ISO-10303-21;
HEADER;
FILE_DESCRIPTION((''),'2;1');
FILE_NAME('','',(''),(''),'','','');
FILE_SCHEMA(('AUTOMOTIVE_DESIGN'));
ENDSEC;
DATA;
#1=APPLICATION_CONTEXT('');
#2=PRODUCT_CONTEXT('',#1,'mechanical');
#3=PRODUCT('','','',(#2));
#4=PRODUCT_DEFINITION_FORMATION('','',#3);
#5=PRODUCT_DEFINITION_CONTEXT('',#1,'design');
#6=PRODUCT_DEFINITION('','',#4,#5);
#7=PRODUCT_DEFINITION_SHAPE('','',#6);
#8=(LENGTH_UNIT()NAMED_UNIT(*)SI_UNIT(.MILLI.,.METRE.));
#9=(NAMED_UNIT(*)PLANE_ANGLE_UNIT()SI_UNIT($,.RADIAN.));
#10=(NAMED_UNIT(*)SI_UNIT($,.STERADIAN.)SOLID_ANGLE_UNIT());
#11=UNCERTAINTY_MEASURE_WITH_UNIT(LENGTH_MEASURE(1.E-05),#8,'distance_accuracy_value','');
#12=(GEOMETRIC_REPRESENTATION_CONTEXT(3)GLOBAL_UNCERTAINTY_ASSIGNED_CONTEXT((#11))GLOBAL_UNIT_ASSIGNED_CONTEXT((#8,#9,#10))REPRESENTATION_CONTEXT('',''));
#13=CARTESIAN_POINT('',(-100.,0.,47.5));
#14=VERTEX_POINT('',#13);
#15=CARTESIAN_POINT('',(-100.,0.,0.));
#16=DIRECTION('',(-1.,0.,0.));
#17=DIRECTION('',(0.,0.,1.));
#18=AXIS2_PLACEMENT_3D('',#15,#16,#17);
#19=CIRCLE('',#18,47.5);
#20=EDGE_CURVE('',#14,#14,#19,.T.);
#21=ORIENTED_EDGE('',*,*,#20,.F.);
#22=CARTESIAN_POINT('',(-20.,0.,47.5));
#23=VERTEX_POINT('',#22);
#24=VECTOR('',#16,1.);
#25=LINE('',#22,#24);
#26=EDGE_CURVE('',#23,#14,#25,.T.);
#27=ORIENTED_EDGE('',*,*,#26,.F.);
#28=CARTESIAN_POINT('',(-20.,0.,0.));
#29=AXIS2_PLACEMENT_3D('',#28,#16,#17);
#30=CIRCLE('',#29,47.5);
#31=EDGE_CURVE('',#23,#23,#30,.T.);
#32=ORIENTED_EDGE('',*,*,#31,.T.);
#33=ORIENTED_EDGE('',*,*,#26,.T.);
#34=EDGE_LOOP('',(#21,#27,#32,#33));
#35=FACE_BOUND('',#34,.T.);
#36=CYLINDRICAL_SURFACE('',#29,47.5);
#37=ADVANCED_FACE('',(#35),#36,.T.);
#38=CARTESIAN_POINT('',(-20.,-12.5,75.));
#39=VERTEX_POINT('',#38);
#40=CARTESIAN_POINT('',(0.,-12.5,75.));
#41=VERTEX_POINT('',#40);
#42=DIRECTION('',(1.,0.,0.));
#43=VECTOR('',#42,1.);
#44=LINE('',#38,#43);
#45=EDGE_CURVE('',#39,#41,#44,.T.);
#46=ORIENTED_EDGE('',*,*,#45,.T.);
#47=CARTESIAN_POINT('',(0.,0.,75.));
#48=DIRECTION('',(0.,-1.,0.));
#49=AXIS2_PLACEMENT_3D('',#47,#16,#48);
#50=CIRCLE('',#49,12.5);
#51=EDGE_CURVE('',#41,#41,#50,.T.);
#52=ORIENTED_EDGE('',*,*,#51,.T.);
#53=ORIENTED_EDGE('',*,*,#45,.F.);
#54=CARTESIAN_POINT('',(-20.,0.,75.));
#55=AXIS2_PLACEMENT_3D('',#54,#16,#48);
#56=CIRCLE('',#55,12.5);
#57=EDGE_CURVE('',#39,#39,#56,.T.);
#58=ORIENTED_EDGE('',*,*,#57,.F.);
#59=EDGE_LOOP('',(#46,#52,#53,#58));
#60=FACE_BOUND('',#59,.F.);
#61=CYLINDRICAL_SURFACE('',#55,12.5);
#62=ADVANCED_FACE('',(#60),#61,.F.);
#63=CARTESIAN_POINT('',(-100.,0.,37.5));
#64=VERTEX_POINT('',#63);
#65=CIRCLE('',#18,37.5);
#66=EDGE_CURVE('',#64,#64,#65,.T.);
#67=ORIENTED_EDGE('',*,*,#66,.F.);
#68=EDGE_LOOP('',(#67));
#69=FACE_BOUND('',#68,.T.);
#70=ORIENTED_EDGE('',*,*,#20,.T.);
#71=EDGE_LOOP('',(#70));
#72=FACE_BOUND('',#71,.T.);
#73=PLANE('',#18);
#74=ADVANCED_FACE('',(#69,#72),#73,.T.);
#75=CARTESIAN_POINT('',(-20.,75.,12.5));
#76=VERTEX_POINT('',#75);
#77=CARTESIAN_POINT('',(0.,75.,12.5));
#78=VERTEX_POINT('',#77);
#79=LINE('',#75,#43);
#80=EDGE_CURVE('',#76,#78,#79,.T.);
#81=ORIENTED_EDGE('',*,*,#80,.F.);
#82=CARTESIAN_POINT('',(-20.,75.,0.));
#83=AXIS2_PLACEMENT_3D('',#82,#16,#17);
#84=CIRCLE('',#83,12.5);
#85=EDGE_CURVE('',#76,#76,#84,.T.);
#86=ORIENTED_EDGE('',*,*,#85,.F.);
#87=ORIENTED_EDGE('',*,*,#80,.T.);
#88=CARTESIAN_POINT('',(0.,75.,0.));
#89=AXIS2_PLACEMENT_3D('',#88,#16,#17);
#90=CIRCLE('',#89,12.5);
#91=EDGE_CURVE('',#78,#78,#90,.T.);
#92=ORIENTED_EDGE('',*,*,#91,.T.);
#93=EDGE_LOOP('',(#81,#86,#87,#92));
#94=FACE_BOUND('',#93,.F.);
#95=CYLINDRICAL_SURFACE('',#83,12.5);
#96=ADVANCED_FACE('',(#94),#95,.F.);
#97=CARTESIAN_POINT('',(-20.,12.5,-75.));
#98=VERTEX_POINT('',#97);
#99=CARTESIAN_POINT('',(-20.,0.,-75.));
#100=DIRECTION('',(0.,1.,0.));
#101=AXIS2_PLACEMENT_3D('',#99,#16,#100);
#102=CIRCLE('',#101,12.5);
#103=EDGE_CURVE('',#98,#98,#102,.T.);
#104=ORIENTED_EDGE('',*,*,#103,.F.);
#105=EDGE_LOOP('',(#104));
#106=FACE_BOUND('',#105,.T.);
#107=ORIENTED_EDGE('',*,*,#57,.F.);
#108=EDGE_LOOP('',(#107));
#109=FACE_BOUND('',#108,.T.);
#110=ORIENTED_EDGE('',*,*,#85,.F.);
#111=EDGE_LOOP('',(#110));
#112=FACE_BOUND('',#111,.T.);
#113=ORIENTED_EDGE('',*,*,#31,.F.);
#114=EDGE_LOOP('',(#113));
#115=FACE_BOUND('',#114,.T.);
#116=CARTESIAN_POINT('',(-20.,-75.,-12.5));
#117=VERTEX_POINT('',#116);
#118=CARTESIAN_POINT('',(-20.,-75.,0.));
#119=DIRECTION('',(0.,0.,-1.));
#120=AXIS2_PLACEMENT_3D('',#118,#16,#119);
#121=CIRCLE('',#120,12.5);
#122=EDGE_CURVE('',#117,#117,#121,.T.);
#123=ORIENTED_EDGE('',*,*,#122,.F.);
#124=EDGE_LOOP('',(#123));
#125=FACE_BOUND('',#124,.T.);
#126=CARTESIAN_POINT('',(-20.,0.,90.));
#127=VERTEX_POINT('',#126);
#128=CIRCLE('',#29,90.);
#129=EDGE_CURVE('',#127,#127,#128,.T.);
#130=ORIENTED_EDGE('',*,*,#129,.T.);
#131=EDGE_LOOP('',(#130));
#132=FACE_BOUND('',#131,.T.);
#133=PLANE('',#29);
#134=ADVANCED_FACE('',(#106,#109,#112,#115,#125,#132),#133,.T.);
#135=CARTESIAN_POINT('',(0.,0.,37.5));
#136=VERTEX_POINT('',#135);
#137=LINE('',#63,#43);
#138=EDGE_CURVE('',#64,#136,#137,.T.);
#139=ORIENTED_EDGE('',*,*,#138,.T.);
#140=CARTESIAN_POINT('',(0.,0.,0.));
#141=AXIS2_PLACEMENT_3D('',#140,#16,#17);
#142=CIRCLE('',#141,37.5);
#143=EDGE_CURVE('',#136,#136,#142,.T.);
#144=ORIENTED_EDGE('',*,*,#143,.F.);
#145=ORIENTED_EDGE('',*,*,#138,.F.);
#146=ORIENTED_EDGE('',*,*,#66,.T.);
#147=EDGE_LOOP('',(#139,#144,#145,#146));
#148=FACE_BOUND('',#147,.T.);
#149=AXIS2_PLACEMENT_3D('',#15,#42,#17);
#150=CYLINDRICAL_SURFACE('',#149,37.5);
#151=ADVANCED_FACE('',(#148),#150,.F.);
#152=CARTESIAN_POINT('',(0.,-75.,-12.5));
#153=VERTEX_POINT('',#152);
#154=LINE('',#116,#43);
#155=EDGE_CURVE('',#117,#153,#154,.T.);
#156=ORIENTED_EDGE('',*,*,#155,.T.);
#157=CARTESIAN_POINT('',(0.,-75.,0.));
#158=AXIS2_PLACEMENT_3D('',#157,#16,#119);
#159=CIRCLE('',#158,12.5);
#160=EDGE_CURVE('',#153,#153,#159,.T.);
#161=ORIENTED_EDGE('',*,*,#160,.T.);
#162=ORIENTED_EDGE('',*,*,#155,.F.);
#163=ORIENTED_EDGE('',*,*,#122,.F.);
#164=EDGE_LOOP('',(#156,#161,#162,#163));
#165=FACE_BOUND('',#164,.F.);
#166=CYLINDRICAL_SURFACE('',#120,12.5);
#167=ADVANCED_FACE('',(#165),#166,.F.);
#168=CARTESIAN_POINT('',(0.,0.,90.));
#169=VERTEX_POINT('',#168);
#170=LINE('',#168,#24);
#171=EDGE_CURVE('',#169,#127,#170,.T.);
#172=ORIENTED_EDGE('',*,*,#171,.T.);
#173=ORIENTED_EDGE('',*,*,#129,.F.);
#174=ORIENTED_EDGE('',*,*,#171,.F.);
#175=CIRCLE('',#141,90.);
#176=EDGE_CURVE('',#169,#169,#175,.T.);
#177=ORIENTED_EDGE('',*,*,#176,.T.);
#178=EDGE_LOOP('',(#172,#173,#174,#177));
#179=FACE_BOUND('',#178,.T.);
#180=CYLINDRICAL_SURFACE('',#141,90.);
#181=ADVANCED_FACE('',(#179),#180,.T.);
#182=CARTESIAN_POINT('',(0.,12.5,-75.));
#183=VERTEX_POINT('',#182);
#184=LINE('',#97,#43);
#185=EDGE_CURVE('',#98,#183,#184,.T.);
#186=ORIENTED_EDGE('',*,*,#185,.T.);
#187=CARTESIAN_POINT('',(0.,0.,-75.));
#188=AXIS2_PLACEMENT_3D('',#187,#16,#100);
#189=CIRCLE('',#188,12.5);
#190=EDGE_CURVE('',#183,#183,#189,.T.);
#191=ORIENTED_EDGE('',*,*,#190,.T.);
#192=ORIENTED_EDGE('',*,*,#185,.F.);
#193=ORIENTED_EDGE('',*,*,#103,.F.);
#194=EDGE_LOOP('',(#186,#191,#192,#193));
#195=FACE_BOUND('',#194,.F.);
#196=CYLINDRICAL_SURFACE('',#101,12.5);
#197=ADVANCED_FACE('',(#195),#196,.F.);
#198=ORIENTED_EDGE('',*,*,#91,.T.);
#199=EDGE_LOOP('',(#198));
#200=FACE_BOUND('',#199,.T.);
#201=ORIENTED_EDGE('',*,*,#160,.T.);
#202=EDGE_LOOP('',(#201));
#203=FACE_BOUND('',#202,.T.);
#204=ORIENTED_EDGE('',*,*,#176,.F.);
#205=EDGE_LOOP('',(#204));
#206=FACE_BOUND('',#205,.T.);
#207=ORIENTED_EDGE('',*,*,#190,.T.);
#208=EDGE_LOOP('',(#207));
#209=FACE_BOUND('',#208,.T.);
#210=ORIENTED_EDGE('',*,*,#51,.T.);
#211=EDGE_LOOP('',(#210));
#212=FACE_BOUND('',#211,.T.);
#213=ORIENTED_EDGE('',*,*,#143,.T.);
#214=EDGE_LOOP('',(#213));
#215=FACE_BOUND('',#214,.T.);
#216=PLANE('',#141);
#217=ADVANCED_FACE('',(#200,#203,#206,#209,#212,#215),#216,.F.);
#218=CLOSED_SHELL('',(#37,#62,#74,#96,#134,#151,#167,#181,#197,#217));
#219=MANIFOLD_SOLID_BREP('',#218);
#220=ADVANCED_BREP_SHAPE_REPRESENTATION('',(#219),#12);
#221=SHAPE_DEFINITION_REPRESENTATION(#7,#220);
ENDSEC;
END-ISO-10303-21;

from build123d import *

# Parameters (mm, degrees)
F2_R            = 12.5
F3_DEPTH        = 25
F3_COPIES_COUNT = 4


# Not quite as in the source:
# - a pattern or mirror of a feature is missing from the dataset's text; its kind, count and spacing are read off the source's solid


with BuildPart() as f1:
    # F0 (on Front) → F1 (revolve)
    with BuildSketch(Plane.XZ):
        Polygon((-100, 37.5), (0, 37.5), (0, 90), (-20, 90), (-20, 47.5), (-100, 47.5), align=None)
    revolve(axis=Axis((-58.4905732034, 0, 0), (-1, 0, 0)))

    # F2 (on face) → F3 (cut)
    with BuildSketch(Plane(origin=(-20, 0, 0), x_dir=(0, -1, 0), z_dir=(-1, 0, 0))):
        with Locations((0, 75)):
            Circle(F2_R)
    f3 = extrude(amount=-F3_DEPTH, mode=Mode.SUBTRACT)

    # F3_copies: F3 ×4 about axis
    f3_copies_axis = Axis((0, 0, 0), (1, 0, 0))
    for i in range(1, F3_COPIES_COUNT):
        add(f3.rotate(f3_copies_axis, i * 360 / F3_COPIES_COUNT), mode=Mode.SUBTRACT)


solid = f1.part
